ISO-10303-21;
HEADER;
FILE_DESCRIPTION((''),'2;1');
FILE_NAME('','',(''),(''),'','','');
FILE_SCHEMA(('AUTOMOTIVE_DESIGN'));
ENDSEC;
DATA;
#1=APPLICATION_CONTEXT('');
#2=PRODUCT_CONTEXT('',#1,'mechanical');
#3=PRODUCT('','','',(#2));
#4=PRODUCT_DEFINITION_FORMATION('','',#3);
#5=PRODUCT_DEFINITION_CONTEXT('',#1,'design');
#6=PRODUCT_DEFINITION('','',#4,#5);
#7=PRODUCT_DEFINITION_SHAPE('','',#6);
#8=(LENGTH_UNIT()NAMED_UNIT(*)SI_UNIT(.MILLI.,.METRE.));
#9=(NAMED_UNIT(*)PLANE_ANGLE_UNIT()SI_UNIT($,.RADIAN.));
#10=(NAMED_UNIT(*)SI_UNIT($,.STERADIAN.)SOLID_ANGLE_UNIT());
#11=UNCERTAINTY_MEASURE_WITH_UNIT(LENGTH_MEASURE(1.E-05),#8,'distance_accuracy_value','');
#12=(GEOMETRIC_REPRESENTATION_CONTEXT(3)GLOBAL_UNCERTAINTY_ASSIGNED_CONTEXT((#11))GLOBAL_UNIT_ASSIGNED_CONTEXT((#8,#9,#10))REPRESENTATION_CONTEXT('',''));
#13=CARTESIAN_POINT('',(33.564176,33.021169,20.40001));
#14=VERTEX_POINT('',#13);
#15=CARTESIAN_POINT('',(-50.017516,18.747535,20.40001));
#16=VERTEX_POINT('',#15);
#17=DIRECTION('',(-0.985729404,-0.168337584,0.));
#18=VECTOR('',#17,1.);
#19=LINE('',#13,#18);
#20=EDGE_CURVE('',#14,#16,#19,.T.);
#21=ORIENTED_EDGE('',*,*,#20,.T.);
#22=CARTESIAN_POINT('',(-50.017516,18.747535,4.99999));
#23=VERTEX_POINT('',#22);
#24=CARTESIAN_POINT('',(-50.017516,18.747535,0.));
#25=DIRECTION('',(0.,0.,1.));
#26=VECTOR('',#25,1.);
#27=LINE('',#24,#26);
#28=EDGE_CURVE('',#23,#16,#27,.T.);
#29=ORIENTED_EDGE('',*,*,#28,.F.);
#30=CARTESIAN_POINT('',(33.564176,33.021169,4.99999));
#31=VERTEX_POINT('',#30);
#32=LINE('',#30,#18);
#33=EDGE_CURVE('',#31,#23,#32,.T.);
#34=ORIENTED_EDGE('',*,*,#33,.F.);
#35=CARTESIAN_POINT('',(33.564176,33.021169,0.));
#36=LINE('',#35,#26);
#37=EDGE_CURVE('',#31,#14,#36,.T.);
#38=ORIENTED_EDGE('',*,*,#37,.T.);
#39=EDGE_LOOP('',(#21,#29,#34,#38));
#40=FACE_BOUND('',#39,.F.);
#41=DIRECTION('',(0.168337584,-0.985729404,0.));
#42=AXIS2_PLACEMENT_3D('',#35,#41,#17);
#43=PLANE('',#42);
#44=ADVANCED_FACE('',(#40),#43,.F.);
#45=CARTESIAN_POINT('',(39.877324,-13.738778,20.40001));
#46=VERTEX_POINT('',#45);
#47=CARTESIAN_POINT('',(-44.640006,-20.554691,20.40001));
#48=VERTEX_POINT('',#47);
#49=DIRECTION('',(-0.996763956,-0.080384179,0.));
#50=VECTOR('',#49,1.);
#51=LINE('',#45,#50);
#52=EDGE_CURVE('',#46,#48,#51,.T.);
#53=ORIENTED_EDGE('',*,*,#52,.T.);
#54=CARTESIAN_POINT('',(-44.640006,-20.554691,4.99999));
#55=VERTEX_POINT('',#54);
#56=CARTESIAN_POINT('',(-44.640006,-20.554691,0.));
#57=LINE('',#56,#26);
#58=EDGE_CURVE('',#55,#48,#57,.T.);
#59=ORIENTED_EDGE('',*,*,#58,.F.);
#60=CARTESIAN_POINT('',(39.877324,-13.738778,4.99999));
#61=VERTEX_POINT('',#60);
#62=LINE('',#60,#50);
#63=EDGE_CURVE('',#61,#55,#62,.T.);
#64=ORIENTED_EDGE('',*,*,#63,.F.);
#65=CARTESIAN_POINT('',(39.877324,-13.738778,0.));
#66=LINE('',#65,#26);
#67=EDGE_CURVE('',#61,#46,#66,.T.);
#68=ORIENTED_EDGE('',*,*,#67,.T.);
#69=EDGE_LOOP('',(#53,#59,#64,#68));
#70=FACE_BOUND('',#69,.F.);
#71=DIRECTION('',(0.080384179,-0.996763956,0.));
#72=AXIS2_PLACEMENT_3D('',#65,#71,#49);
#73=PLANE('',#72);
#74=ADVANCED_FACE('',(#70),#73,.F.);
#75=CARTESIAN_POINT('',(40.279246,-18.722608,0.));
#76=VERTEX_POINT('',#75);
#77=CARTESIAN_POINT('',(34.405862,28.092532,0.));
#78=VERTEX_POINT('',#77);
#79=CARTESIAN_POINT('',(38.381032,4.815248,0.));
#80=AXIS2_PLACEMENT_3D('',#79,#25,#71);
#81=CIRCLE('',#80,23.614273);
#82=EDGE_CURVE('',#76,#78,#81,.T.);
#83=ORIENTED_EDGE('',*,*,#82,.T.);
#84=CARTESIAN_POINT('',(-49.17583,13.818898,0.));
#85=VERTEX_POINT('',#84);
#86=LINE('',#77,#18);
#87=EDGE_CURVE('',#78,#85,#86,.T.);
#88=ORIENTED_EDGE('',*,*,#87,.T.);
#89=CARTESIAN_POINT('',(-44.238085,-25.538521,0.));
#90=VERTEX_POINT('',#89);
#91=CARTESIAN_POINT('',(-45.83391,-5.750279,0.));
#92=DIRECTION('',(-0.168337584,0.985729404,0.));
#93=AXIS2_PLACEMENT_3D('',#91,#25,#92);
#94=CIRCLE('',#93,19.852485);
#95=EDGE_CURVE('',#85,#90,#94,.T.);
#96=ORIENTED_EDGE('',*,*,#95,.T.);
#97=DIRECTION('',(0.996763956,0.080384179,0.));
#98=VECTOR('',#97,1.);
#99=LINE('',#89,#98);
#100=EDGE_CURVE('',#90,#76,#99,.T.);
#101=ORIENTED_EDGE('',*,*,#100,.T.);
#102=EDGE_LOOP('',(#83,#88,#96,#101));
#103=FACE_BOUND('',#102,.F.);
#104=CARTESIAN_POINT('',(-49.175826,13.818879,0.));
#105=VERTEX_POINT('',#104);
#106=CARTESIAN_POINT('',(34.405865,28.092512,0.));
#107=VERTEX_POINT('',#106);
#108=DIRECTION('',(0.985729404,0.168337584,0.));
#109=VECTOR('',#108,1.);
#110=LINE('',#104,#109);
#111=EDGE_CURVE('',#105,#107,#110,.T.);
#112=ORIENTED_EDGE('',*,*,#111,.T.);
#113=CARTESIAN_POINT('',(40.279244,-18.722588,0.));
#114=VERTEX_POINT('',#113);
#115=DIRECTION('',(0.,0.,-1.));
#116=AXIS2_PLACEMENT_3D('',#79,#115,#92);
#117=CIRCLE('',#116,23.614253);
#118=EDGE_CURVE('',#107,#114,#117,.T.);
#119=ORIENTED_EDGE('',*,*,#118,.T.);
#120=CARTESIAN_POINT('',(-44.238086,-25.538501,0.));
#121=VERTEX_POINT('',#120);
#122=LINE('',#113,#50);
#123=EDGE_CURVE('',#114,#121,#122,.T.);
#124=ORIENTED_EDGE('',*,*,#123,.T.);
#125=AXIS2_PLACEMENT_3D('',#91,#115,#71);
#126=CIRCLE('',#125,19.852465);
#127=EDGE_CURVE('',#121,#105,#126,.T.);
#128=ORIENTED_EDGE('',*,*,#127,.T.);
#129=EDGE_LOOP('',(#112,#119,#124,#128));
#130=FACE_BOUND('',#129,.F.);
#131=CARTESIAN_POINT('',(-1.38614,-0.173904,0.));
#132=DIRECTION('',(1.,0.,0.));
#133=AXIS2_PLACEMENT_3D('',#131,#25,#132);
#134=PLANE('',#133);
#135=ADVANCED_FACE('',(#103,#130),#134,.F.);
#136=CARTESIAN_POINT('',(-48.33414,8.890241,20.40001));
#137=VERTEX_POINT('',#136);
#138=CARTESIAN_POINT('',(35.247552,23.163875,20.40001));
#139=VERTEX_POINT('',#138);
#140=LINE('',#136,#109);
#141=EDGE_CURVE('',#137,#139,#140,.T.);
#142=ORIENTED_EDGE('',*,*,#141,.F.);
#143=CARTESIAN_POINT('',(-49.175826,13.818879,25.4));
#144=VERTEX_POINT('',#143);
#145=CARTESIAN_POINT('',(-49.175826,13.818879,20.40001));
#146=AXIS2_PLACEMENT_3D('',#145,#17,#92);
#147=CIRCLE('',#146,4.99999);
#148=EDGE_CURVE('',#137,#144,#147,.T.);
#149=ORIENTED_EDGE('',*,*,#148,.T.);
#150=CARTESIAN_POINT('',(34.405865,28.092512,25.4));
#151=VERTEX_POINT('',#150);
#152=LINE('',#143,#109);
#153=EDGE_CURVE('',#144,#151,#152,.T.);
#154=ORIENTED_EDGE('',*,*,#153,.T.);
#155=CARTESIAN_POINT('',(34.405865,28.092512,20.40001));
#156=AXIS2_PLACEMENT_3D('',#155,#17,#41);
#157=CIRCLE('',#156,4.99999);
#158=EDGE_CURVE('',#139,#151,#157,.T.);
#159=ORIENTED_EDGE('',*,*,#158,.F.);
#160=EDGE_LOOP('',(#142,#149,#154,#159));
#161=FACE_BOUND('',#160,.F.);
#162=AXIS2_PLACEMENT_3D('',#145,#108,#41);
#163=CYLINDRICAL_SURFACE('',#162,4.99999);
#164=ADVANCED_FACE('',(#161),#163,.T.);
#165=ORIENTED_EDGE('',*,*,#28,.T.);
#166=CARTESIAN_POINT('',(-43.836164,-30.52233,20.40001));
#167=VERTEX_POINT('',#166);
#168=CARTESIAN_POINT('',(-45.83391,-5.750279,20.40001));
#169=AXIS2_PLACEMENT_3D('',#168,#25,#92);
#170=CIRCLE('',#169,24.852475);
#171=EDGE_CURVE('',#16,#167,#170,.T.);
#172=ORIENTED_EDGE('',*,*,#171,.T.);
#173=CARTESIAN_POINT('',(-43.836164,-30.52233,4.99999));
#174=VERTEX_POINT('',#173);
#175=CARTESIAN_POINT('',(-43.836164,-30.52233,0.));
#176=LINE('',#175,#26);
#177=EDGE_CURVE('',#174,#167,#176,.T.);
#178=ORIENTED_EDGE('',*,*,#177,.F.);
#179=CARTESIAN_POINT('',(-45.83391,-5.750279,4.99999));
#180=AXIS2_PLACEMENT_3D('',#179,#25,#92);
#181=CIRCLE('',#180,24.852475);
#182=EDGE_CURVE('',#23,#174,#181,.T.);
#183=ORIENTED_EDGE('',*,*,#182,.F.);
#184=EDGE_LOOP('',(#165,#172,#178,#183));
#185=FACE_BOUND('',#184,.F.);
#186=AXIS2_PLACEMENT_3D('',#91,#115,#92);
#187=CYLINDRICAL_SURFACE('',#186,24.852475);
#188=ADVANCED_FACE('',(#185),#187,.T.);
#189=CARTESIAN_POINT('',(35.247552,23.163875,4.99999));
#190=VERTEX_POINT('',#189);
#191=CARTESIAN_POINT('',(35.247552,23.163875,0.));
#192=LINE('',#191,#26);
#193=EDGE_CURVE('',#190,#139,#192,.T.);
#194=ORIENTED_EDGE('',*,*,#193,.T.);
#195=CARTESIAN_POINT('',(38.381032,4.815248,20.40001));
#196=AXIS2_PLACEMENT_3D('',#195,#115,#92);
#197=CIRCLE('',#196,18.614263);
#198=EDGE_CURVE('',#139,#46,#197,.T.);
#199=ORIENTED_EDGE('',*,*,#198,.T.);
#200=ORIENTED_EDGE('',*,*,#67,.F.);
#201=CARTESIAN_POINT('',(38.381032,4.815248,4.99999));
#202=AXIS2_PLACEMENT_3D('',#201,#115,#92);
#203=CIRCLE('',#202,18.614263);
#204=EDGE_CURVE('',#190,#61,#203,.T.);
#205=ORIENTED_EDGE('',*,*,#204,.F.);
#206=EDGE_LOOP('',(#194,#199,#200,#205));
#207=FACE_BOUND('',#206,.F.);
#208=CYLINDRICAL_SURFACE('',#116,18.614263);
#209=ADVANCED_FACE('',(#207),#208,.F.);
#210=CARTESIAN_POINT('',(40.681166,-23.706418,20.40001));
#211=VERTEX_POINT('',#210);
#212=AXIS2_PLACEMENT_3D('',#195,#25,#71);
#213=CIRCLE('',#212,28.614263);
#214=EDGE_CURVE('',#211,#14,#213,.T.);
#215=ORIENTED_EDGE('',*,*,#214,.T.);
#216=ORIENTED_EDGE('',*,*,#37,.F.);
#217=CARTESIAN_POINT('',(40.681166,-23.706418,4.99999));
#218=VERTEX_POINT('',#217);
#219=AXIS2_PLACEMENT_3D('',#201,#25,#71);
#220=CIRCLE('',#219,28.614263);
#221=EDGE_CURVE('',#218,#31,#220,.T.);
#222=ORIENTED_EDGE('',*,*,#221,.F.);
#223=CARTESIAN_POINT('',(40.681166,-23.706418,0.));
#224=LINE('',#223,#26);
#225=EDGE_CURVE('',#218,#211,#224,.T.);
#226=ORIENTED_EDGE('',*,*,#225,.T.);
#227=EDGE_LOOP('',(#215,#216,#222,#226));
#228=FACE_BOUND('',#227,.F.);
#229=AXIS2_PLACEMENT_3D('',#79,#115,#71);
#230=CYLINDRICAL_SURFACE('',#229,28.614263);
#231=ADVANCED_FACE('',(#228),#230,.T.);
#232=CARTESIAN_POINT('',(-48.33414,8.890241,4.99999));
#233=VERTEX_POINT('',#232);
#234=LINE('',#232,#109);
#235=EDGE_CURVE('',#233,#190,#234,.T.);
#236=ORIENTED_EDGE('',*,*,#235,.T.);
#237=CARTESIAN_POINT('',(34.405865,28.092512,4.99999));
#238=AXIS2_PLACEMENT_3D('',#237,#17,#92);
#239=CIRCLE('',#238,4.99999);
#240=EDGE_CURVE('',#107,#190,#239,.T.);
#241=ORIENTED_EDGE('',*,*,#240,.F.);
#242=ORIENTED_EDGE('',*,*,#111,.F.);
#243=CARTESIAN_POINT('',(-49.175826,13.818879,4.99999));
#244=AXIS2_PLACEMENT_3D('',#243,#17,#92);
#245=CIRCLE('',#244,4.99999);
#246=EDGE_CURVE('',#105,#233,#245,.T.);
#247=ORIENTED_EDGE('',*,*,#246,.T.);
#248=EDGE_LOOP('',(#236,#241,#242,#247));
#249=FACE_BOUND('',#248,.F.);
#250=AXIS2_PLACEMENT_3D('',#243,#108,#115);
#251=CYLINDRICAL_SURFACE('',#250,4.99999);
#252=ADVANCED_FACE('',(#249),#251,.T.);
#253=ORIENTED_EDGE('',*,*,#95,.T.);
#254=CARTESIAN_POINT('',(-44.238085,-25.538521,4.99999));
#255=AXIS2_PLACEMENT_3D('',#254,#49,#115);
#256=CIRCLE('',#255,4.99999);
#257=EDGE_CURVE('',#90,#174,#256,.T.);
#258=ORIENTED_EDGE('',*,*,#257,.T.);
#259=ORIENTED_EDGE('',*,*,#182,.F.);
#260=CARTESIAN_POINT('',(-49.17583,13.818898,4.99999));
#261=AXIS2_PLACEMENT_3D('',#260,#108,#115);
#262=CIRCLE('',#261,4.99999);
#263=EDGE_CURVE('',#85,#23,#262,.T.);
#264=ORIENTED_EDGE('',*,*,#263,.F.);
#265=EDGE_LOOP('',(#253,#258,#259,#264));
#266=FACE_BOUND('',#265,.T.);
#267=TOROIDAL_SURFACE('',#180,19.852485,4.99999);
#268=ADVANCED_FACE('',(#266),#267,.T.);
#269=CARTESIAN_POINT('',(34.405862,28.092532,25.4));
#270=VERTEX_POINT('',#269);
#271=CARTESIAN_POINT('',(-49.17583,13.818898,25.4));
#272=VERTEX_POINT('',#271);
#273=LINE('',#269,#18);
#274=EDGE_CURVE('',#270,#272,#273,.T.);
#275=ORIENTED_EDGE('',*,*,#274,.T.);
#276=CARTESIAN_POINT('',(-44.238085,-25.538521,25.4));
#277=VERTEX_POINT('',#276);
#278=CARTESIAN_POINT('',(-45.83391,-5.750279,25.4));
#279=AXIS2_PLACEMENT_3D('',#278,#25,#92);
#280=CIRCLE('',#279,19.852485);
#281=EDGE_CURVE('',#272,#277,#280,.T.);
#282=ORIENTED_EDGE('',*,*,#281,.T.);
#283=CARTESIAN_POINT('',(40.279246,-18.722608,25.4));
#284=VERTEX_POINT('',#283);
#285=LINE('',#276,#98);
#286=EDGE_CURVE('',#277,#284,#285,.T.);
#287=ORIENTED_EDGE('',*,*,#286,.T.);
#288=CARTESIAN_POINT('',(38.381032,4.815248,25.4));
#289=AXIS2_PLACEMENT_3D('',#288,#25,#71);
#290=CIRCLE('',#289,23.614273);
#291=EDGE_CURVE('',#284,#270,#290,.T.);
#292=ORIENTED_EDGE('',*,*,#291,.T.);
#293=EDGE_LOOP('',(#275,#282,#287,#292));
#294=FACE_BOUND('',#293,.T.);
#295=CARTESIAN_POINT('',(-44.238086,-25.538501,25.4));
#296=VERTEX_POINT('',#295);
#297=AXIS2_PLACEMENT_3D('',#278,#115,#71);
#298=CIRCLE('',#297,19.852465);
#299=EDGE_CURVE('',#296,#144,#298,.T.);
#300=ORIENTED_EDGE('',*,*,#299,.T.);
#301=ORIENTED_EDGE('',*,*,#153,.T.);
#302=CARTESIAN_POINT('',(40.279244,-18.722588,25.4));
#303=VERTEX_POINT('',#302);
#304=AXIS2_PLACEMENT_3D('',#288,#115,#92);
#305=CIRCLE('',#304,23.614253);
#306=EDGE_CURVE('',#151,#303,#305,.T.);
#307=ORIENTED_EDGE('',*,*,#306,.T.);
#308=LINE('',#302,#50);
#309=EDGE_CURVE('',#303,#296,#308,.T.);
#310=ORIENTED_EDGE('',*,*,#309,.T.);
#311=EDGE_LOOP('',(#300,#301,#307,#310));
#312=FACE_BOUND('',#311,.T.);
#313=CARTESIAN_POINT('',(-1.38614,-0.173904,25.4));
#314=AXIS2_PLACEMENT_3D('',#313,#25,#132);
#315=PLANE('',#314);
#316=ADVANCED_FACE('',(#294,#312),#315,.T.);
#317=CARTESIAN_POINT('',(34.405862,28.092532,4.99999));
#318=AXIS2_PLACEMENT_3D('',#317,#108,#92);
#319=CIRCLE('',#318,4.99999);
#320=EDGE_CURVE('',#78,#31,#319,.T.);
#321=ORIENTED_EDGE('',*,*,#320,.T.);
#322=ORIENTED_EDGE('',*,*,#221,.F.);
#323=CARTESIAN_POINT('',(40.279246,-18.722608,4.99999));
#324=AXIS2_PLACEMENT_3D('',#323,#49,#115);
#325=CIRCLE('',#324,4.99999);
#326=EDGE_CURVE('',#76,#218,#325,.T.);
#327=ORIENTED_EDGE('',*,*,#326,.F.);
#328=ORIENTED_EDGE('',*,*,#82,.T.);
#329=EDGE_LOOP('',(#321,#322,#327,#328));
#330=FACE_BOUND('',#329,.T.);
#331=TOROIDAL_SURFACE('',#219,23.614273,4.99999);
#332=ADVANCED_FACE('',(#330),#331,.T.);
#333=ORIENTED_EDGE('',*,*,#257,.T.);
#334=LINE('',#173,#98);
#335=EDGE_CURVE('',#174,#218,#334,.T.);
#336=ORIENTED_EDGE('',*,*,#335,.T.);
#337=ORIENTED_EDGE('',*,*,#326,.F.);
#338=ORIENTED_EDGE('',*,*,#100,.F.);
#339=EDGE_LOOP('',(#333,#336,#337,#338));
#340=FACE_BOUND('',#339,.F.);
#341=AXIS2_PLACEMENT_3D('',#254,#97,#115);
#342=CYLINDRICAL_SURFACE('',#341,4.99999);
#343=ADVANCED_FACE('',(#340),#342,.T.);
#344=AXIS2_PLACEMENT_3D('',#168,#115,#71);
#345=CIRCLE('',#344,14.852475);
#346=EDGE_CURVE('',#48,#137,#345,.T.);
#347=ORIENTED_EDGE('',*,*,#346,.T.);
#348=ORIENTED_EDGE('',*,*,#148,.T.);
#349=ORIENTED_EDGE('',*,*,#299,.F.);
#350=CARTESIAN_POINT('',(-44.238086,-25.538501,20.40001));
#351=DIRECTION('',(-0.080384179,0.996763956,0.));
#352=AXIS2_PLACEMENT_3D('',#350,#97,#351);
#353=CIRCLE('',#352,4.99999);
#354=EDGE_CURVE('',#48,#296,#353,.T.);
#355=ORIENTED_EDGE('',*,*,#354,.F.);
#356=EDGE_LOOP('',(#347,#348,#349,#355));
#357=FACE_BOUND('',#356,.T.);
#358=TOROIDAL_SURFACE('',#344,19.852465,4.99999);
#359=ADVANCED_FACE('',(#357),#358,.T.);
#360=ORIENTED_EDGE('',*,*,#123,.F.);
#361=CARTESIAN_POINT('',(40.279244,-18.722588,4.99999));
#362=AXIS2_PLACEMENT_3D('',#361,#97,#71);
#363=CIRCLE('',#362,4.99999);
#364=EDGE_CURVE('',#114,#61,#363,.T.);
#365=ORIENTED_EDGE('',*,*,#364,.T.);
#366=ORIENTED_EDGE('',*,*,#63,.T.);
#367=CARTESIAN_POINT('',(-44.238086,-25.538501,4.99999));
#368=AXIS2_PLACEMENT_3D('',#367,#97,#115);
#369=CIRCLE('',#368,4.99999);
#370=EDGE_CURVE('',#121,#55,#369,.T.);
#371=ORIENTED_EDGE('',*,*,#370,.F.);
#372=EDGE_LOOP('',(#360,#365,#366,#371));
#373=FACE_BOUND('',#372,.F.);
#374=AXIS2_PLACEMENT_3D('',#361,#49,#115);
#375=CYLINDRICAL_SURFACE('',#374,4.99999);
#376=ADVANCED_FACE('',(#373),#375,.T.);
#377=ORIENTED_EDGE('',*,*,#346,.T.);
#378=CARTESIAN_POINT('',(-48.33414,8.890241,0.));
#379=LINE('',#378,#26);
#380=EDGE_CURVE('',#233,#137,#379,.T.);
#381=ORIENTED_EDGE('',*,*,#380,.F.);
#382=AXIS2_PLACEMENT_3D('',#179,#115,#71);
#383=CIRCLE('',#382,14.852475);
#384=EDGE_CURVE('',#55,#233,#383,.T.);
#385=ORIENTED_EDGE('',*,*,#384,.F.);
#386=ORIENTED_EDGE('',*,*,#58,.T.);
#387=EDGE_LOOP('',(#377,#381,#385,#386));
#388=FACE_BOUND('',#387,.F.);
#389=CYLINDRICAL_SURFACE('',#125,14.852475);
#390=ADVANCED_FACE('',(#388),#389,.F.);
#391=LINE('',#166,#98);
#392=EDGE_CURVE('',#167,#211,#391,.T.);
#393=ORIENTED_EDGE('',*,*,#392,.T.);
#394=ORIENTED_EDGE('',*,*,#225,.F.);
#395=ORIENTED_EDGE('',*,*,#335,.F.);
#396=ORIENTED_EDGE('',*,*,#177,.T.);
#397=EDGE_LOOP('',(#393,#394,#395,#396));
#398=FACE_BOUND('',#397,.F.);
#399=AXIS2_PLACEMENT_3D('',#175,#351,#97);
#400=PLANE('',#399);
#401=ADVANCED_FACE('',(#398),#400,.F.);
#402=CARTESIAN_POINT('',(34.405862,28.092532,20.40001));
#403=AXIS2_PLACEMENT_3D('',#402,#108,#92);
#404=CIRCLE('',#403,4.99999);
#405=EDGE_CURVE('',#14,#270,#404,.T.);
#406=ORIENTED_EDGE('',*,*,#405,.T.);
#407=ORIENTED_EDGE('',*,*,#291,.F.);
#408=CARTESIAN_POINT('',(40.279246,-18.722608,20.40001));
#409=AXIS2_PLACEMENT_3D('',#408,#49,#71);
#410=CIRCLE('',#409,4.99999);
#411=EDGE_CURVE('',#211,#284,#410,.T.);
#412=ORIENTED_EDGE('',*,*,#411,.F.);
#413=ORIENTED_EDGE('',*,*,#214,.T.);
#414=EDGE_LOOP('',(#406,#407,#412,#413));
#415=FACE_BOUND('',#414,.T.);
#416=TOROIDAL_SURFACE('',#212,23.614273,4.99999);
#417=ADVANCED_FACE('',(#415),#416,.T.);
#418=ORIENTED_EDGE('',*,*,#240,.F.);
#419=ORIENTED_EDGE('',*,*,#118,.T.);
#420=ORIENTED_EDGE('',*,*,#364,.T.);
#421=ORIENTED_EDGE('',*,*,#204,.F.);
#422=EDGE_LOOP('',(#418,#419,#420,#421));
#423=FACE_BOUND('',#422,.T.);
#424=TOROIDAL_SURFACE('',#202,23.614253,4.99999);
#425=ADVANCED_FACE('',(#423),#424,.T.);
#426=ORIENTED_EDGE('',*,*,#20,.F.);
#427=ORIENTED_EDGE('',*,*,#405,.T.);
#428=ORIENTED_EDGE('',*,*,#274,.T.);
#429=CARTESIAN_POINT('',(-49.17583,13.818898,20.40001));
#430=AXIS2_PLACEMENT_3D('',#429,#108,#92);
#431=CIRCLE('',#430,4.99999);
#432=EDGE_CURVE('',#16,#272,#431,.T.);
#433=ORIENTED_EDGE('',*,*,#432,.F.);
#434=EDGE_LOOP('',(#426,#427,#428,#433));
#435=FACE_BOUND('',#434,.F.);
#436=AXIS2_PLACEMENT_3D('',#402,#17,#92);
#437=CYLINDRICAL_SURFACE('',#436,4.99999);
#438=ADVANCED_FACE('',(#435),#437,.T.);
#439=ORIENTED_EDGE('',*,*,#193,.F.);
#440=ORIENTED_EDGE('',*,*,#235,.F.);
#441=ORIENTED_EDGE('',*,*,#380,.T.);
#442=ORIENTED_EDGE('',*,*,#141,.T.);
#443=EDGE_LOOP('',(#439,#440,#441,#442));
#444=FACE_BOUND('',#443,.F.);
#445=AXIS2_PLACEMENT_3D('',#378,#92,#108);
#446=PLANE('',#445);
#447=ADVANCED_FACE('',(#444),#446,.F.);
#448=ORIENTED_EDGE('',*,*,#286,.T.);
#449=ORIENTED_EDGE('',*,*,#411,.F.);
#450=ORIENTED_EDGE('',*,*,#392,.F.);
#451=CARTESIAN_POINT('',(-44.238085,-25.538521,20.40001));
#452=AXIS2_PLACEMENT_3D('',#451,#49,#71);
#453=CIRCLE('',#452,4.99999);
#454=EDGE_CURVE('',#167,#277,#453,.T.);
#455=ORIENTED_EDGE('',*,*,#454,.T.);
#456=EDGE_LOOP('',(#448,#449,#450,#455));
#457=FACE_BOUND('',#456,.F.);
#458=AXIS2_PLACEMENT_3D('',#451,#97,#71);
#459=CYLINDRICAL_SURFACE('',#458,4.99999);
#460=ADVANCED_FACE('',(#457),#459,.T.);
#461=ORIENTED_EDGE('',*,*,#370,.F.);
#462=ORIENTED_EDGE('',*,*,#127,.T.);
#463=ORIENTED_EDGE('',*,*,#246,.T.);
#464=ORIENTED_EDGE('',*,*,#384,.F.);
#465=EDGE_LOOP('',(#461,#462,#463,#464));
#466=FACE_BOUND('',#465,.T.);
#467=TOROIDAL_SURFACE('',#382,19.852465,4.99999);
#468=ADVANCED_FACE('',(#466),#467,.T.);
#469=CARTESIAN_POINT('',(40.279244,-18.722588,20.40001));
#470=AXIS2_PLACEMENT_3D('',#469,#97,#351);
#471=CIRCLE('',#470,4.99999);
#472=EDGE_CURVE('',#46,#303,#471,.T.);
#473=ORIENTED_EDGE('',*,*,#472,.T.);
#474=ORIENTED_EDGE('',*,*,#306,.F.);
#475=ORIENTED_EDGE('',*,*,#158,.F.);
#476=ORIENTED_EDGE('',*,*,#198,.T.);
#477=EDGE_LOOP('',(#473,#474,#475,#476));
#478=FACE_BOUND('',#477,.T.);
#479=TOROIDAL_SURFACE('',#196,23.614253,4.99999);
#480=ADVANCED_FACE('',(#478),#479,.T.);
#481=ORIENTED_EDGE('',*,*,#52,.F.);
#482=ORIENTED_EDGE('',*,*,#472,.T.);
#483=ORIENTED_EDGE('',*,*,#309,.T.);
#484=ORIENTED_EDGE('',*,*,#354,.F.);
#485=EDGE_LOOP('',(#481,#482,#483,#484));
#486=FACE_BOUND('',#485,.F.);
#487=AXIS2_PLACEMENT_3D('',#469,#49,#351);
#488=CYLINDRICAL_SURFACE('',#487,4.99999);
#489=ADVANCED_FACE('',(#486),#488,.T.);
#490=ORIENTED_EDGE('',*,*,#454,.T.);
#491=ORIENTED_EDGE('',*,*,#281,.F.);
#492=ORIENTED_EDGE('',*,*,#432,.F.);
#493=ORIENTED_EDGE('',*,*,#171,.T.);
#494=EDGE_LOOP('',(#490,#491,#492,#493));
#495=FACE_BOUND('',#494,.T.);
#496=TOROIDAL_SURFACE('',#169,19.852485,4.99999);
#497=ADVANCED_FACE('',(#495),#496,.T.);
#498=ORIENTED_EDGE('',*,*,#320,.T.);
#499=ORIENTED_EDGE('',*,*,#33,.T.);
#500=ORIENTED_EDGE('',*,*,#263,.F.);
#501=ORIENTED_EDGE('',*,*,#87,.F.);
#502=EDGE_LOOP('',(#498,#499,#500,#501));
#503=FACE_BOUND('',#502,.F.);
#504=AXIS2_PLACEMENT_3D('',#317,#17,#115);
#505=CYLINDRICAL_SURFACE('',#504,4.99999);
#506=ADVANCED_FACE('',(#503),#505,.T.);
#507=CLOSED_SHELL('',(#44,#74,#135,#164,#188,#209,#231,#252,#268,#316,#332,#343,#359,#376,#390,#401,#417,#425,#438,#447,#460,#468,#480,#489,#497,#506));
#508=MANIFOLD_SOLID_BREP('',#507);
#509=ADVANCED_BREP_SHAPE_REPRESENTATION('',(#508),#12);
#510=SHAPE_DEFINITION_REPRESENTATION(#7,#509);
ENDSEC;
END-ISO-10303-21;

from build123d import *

# Parameters (mm, degrees)
F1_DEPTH = 25.4
F2_R     = 4.99999
F3_R     = 4.99999


# Not quite as in the source:
# - a fillet or chamfer is up to 0.001 mm smaller than in the source, because OpenCascade refuses the exact size


with BuildPart() as f1:
    # F0 (on Top) → F1 (new body)
    with BuildSketch(Plane.XY):
        with BuildLine():
            Line((33.5641757438, 33.0211686649), (-50.0175157615, 18.7475354366))
            ThreePointArc((-50.0175157615, 18.7475354366), (-70.4930751684, -8.8439952597), (-43.8361644944, -30.5223303552))
            Line((-43.8361644944, -30.5223303552), (40.6811656436, -23.7064175959))
            ThreePointArc((40.6811656436, -23.7064175959), (66.7727246476, 8.377243564), (33.5641757438, 33.0211686649))
        make_face()
        with BuildLine():
            Line((39.8773238571, -13.7387780367), (-44.640006281, -20.554690796))
            ThreePointArc((-44.640006281, -20.554690796), (-60.5708580224, -7.5991631795), (-48.3341399261, 8.8902413963))
            Line((-48.3341399261, 8.8902413963), (35.2475515791, 23.1638746246))
            ThreePointArc((35.2475515791, 23.1638746246), (56.8505075016, 7.1324114838), (39.8773238571, -13.7387780367))
        make_face(mode=Mode.SUBTRACT)
    extrude(amount=F1_DEPTH)

    # F2 (radius 5 in the source; OpenCascade refuses exactly that, so slightly less here)
    f2_edges = [f1.edges().sort_by_distance(p)[0] for p in [
        (-2.381341, -17.146734, 25.4),
        (-1.577499, -27.114374, 25.4),
    ]]
    fillet(f2_edges, radius=F2_R)

    # F3 (radius 5 in the source; OpenCascade refuses exactly that, so slightly less here)
    f3_edges = [f1.edges().sort_by_distance(p)[0] for p in [
        (-1.577499, -27.114374, 0),
        (66.772725, 8.377244, 0),
        (-8.22667, 25.884352, 0),
        (-70.493075, -8.843995, 0),
        (56.850508, 7.132411, 0),
        (-2.381341, -17.146734, 0),
        (-60.570858, -7.599163, 0),
        (-6.543294, 16.027058, 0),
    ]]
    fillet(f3_edges, radius=F3_R)


solid = f1.part
